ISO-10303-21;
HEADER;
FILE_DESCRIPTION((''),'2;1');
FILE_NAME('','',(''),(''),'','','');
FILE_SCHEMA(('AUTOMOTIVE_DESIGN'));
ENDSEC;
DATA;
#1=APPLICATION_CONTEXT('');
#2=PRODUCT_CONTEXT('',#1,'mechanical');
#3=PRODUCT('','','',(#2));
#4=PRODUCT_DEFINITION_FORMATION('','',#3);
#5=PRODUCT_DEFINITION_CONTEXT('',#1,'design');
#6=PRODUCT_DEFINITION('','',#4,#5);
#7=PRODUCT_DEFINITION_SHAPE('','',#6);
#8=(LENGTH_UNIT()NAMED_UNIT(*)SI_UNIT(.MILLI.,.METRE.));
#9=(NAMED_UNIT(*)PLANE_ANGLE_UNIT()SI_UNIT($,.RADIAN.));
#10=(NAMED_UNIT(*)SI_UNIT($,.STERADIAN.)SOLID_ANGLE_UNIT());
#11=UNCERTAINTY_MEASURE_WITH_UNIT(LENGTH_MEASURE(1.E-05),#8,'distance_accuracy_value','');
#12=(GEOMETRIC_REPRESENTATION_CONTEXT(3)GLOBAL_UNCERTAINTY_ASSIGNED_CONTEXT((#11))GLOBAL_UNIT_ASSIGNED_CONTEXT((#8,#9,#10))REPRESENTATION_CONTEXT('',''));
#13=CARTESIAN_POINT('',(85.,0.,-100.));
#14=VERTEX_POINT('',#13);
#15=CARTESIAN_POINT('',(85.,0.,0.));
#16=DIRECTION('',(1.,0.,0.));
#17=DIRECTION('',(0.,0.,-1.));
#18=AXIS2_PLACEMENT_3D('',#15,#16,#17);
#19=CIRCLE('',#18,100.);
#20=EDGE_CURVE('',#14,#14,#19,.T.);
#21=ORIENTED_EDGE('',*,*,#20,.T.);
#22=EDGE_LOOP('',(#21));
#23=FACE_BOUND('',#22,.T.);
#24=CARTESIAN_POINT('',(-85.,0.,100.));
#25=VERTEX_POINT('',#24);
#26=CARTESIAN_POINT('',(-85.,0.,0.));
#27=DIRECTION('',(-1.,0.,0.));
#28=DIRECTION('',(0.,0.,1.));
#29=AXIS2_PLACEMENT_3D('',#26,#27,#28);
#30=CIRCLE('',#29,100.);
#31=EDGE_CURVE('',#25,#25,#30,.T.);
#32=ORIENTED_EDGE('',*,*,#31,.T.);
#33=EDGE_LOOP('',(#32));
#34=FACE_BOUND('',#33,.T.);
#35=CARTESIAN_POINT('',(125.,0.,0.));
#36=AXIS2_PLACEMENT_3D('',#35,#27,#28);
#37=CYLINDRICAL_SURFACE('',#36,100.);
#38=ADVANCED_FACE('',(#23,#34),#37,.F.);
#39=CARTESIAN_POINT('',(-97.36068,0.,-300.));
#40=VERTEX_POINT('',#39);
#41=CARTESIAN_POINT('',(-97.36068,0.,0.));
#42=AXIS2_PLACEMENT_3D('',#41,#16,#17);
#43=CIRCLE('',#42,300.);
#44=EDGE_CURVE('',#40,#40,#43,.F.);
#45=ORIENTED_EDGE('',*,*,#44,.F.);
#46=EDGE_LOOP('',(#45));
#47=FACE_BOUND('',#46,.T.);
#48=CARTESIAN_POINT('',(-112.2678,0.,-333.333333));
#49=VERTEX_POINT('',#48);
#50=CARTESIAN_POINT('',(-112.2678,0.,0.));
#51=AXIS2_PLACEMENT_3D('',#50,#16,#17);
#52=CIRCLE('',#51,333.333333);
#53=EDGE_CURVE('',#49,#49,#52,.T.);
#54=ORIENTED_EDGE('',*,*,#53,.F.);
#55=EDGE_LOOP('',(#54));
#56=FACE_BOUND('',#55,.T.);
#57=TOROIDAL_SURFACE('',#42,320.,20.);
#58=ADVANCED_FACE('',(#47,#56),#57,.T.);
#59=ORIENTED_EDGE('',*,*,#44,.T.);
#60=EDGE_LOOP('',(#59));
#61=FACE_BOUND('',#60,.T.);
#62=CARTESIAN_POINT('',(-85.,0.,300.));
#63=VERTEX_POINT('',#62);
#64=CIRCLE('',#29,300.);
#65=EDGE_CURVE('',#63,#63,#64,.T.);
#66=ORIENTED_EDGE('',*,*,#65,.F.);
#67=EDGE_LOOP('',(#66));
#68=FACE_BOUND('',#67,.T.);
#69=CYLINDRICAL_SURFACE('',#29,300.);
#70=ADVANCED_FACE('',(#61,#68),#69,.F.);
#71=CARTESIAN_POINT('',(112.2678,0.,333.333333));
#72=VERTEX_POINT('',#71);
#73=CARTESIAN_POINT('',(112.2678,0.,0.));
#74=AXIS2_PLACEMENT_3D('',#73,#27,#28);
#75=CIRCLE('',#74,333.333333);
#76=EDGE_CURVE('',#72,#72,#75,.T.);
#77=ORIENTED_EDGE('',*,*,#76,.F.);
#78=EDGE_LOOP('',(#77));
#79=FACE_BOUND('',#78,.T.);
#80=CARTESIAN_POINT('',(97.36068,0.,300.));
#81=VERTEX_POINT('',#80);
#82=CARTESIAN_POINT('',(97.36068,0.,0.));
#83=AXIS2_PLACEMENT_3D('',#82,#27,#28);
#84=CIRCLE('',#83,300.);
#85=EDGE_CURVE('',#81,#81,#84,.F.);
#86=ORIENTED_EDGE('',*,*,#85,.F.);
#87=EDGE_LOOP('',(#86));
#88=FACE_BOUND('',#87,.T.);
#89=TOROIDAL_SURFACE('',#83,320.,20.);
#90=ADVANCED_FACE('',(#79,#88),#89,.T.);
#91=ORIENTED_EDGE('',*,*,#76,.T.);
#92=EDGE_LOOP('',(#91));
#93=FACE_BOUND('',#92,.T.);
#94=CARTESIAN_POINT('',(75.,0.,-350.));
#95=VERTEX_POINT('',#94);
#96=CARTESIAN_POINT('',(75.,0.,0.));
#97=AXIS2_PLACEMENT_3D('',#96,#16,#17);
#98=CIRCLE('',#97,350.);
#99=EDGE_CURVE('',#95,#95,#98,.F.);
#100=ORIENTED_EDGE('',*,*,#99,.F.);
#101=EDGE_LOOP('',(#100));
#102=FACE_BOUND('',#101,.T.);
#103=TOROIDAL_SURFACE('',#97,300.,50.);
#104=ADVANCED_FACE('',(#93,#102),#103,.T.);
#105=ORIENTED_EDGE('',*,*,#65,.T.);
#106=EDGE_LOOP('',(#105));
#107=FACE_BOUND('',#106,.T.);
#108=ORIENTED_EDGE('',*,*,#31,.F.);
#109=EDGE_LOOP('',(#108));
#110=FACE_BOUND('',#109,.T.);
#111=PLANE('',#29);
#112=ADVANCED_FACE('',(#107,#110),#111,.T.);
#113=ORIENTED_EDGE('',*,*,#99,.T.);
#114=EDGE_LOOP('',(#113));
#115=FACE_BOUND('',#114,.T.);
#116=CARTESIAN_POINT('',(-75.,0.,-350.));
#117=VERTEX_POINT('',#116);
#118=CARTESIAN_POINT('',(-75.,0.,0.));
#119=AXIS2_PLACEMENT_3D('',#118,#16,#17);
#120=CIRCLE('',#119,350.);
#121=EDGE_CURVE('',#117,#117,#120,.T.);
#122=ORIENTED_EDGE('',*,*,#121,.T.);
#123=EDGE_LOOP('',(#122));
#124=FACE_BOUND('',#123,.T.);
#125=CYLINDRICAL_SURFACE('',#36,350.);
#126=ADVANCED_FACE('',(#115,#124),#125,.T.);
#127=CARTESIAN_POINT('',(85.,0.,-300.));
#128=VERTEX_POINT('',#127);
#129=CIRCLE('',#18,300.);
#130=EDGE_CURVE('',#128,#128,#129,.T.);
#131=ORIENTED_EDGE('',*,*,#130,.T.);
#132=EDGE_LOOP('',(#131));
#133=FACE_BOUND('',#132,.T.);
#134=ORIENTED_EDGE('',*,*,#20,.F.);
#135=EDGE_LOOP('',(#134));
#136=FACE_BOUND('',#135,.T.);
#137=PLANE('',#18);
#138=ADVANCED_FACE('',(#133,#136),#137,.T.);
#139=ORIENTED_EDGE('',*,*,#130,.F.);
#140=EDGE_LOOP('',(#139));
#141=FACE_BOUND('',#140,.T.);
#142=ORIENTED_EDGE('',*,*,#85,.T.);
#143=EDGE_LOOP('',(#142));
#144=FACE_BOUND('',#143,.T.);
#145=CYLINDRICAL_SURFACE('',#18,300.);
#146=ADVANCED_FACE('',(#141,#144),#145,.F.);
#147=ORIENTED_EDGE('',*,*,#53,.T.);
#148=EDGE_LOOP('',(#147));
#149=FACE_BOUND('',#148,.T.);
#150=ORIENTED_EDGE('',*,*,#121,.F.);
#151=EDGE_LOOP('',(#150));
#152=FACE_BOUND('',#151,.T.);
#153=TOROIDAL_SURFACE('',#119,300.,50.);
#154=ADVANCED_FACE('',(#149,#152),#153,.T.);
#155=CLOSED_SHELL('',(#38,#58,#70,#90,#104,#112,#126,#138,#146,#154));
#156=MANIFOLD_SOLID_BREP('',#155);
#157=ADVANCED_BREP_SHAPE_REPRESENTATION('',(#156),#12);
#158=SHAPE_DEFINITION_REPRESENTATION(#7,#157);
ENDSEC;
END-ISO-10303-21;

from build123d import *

# Parameters (mm, degrees)
SKETCH1_R           = 350
SKETCH1_R_2         = 100
BOSS_EXTRUDE1_DEPTH = 125
FILLET1_R           = 50
FILLET2_R           = 50
SKETCH2_R           = 300
CUT_EXTRUDE1_DEPTH  = 40
CUT_EXTRUDE2_START  = -40
SKETCH4_R           = 300
CUT_EXTRUDE2_DEPTH  = 40
FILLET3_R           = 20
FILLET4_R           = 20


with BuildPart() as part:
    # Sketch1 → Boss-Extrude1 (new, symmetric)
    with BuildSketch(Plane(origin=(0, 0, 0), x_dir=(0, 0, -1), z_dir=(1, 0, 0))):
        Circle(SKETCH1_R)
        Circle(SKETCH1_R_2, mode=Mode.SUBTRACT)
    extrude(amount=BOSS_EXTRUDE1_DEPTH, both=True)

    # Fillet1
    fillet1_edges = [part.edges().sort_by_distance(p)[0] for p in [
        (-125, 0, 350),
    ]]
    fillet(fillet1_edges, radius=FILLET1_R)

    # Fillet2
    fillet2_edges = [part.edges().sort_by_distance(p)[0] for p in [
        (125, 0, 350),
    ]]
    fillet(fillet2_edges, radius=FILLET2_R)

    # Sketch2 → Cut-Extrude1 (cut)
    with BuildSketch(Plane.ZY.offset(125)):
        Circle(SKETCH2_R)
    extrude(amount=-CUT_EXTRUDE1_DEPTH, mode=Mode.SUBTRACT)

    # Sketch4 → Cut-Extrude2 (cut)
    with BuildSketch(Plane(origin=(125, 0, 0), x_dir=(0, 0, -1), z_dir=(1, 0, 0)).offset(CUT_EXTRUDE2_START)):
        with Locations(Location((0, 0, 0), (0, 0, 180))):
            Circle(SKETCH4_R)
    extrude(amount=CUT_EXTRUDE2_DEPTH, mode=Mode.SUBTRACT)

    # Fillet3
    # the kernel refuses this fillet: 20 mm, written as the material it takes off along each edge
    with BuildSketch(Plane(origin=(125, 0, 0), x_dir=(0, 0, -1), z_dir=(0, -1, 0))) as fillet3_piece_1:
        with BuildLine():
            CenterArc((320, -27.639320225), FILLET3_R, 48.189685104, 131.810314896)
            Line((300, -27.639320225), (300, 0))
            ThreePointArc((300, 0), (317.841104489, -3.291382052), (333.333333333, -12.732200375))
        make_face()
    fillet3_piece_1_solid = revolve(axis=Axis((125, 0, 0), (1, 0, 0)), revolution_arc=180, mode=Mode.PRIVATE)
    with BuildSketch(Plane(origin=(125, 0, 0), x_dir=(0, 0, 1), z_dir=(0, 1, 0))) as fillet3_piece_2:
        with BuildLine():
            CenterArc((320, -27.639320225), FILLET3_R, 48.189685104, 131.810314896)
            Line((300, -27.639320225), (300, 0))
            ThreePointArc((300, 0), (317.841104489, -3.291382052), (333.333333333, -12.732200375))
        make_face()
    fillet3_piece_2_solid = revolve(axis=Axis((125, 0, 0), (1, 0, 0)), revolution_arc=180, mode=Mode.PRIVATE)
    add([fillet3_piece_1_solid, fillet3_piece_2_solid], mode=Mode.SUBTRACT)

    # Fillet4
    # the kernel refuses this fillet: 20 mm, written as the material it takes off along each edge
    with BuildSketch(Plane(origin=(-125, 0, 0), x_dir=(0, 0, -1), z_dir=(0, -1, 0))) as fillet4_piece_1:
        with BuildLine():
            CenterArc((320, 27.639320225), FILLET4_R, 180, 131.810314896)
            Line((300, 27.639320225), (300, 0))
            ThreePointArc((300, 0), (317.841104489, 3.291382052), (333.333333333, 12.732200375))
        make_face()
    fillet4_piece_1_solid = revolve(axis=Axis((-125, 0, 0), (1, 0, 0)), revolution_arc=180, mode=Mode.PRIVATE)
    with BuildSketch(Plane(origin=(-125, 0, 0), x_dir=(0, 0, 1), z_dir=(0, 1, 0))) as fillet4_piece_2:
        with BuildLine():
            CenterArc((320, 27.639320225), FILLET4_R, 180, 131.810314896)
            Line((300, 27.639320225), (300, 0))
            ThreePointArc((300, 0), (317.841104489, 3.291382052), (333.333333333, 12.732200375))
        make_face()
    fillet4_piece_2_solid = revolve(axis=Axis((-125, 0, 0), (1, 0, 0)), revolution_arc=180, mode=Mode.PRIVATE)
    add([fillet4_piece_1_solid, fillet4_piece_2_solid], mode=Mode.SUBTRACT)


solid = part.part
